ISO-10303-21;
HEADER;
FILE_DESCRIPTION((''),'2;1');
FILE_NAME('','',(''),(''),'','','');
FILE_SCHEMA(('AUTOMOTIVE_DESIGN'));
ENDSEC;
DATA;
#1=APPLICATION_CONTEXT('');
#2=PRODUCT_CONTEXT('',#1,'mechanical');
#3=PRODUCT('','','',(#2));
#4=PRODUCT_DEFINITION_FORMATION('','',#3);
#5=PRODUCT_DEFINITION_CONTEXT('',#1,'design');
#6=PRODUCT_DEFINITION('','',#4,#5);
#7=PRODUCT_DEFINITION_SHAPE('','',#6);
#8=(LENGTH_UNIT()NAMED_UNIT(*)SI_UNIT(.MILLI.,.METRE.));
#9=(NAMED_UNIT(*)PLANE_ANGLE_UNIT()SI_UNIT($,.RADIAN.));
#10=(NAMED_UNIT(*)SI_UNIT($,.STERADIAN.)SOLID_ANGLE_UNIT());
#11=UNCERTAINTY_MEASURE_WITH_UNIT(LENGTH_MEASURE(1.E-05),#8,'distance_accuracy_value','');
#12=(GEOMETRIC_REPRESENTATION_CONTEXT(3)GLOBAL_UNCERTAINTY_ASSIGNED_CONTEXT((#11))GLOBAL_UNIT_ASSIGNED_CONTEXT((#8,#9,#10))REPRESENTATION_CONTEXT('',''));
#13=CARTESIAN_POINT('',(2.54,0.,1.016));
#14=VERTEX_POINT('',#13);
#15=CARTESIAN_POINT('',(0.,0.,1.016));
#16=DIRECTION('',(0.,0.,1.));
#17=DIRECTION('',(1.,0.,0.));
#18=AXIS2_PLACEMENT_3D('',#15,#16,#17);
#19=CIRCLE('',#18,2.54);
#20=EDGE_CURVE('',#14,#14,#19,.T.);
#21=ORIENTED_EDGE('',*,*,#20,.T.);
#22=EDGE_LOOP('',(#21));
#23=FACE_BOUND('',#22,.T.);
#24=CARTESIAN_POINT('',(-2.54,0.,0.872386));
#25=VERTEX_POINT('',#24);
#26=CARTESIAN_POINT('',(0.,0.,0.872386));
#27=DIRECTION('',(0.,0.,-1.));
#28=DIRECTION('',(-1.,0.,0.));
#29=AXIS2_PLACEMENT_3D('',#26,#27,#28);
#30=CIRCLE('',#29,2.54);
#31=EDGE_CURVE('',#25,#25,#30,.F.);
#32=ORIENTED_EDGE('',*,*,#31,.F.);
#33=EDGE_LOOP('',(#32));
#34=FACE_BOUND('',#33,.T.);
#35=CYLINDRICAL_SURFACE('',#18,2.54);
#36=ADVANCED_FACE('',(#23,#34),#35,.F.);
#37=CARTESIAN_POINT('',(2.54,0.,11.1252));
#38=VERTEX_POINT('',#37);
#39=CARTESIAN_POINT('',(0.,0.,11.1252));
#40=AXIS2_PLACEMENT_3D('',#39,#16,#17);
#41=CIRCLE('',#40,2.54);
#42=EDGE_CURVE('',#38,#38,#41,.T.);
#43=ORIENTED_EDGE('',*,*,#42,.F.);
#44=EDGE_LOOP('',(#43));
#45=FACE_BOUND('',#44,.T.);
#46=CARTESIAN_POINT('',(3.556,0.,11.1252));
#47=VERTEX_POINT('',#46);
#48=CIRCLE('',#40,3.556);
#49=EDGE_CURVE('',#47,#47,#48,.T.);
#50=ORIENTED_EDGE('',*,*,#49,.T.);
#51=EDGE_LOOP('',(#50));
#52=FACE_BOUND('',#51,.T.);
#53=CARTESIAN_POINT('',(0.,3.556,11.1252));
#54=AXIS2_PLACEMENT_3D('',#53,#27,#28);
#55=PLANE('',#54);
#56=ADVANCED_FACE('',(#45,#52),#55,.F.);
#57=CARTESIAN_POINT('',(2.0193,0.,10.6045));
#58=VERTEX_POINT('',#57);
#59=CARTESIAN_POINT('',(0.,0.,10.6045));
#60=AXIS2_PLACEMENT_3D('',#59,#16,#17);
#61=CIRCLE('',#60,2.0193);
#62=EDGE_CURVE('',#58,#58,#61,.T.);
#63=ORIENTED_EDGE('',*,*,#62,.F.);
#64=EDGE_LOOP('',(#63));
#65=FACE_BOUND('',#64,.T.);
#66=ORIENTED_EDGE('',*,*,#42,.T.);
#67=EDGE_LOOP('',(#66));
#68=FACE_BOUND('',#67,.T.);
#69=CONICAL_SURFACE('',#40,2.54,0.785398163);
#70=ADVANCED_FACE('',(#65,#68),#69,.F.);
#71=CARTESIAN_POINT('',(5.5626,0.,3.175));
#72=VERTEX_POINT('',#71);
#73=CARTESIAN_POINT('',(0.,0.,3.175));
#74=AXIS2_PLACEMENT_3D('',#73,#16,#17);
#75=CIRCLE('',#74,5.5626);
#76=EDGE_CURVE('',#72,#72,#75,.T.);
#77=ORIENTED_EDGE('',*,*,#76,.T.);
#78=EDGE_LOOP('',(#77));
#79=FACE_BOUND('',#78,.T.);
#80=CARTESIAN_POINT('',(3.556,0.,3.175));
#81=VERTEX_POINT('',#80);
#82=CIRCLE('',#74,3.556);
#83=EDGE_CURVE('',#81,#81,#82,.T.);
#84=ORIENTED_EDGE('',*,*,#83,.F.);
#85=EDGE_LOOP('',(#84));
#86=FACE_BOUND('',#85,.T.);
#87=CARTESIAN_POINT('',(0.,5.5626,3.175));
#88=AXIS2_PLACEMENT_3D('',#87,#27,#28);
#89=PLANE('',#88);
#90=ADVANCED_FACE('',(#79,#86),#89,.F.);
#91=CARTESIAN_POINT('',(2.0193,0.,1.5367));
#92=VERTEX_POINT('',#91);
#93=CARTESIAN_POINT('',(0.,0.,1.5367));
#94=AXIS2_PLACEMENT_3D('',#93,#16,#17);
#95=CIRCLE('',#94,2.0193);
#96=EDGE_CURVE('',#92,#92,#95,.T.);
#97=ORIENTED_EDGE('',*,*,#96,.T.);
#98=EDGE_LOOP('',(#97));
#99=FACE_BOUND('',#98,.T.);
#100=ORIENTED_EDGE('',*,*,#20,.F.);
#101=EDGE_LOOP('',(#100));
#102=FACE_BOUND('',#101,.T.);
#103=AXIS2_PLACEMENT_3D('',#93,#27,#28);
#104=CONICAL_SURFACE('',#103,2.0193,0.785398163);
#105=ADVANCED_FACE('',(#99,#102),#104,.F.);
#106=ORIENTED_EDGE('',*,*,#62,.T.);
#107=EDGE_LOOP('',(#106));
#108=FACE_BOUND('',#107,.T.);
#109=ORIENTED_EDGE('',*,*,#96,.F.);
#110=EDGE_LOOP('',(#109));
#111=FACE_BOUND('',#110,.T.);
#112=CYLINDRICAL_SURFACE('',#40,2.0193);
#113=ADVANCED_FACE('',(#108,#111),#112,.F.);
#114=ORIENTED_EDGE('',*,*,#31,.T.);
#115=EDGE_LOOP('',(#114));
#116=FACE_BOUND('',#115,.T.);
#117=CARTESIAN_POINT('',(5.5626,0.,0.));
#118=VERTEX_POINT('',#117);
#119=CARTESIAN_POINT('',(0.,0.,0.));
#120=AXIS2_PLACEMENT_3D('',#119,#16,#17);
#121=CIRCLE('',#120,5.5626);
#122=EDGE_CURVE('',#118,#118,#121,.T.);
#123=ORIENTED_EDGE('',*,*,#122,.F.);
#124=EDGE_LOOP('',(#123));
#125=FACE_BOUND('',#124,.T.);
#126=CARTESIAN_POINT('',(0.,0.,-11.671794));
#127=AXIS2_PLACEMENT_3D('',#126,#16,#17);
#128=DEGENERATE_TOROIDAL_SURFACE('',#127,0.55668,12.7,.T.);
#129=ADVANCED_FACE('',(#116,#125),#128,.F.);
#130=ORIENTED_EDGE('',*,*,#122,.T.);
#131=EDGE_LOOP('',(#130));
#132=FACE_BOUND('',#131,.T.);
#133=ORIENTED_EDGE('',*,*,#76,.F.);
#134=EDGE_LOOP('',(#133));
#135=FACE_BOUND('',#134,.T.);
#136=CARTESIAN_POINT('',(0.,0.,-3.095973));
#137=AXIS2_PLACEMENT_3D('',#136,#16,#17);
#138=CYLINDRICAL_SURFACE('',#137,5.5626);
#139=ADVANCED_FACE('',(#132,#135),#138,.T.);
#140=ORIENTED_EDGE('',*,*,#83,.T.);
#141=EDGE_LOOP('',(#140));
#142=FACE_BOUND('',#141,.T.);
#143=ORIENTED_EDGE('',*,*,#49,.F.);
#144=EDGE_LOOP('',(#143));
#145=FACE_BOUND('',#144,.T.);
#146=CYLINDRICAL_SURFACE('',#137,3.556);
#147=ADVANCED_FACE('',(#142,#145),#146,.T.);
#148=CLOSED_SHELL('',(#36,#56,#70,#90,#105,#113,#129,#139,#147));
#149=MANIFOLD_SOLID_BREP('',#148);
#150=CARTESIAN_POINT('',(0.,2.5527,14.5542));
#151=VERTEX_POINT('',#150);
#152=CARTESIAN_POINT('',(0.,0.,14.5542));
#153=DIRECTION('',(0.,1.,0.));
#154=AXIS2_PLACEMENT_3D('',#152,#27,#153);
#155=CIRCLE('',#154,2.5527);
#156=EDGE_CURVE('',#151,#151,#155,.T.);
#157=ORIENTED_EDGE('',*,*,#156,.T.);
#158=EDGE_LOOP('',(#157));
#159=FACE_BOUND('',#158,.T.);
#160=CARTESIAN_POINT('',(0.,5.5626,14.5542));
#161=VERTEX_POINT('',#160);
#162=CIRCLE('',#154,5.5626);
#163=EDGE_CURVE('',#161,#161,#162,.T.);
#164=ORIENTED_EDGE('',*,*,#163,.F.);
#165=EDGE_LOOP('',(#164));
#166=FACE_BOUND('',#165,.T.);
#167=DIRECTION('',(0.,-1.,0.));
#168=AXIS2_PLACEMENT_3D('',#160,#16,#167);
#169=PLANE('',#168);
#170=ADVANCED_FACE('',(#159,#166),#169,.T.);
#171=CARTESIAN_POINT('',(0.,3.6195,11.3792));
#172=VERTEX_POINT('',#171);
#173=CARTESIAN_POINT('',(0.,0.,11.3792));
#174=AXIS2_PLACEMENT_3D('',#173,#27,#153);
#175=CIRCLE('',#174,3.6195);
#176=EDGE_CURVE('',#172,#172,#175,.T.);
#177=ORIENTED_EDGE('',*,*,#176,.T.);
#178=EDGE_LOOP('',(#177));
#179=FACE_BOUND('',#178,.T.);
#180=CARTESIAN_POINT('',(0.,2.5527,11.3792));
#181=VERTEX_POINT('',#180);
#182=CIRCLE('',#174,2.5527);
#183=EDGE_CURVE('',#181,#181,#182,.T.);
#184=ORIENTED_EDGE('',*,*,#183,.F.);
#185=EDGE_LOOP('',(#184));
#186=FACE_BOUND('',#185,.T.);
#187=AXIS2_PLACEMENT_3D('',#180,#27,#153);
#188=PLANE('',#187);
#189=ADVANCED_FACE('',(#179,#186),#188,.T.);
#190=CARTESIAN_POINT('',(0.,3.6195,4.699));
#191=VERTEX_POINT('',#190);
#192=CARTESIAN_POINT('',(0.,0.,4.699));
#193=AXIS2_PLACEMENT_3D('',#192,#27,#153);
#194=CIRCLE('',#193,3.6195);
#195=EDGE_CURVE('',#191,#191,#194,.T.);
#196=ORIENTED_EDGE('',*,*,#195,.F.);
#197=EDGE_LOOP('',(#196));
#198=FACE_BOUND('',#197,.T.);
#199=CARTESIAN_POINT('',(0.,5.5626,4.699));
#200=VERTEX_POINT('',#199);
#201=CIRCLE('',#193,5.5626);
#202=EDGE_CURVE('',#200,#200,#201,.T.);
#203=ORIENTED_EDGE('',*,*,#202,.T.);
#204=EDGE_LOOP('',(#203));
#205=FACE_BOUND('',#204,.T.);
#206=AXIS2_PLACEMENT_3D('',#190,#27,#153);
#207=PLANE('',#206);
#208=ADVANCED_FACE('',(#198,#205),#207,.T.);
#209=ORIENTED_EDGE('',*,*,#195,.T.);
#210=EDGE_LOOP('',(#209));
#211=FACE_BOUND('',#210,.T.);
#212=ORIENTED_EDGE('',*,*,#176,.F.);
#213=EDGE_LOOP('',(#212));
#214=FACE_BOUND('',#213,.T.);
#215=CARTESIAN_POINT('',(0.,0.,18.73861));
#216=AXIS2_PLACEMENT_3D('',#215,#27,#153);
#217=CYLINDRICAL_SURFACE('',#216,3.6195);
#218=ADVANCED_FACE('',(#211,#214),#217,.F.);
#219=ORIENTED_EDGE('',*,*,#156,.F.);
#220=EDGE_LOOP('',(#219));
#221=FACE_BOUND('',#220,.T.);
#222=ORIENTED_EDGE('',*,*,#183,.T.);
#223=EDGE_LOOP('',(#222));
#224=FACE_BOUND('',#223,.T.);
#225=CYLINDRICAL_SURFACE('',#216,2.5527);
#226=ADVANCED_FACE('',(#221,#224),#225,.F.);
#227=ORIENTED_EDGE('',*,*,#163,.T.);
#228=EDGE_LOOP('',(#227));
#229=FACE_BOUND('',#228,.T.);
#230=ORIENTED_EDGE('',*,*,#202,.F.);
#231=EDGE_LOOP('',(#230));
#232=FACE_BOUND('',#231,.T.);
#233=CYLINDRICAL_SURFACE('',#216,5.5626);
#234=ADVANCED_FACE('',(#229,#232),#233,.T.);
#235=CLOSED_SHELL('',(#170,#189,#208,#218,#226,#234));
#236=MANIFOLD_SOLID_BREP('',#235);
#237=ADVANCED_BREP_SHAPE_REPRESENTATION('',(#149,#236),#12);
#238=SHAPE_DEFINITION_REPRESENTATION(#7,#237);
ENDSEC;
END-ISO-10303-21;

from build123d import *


# Read off the part's stored shape, not the designer's step: #10-32 Tapped Hole1
with BuildPart() as part:
    # Sketch1 → Revolve1 (revolve)
    with BuildSketch(Plane(origin=(0, 0, 0), x_dir=(0, 0, -1), z_dir=(1, 0, 0)), mode=Mode.PRIVATE) as revolve1_sk:
        with BuildLine():
            Line((0, 5.5626), (-3.175, 5.5626))
            Line((-3.175, 5.5626), (-3.175, 3.556))
            Line((-3.175, 3.556), (-11.1252, 3.556))
            Line((-11.1252, 3.556), (-11.1252, 0))
            Line((-11.1252, 0), (-1.016, 0))
            ThreePointArc((-1.016, 0), (-0.821524687, 2.838564783), (0, 5.5626))
        make_face()
    revolve(revolve1_sk.sketch.rotate(Axis((0, 0, -3.095973099), (0, 0, -1)), 90), axis=Axis((0, 0, -3.095973099), (0, 0, -1)))

    # #10-32 Tapped Hole1 outline → #10-32 Tapped Hole1 (revolve, cut)
    with BuildSketch(Plane.XZ):
        Polygon((0, 0.872385993), (2.54, 0.872385993), (2.54, 1.016), (2.0193, 1.5367), (2.0193, 10.6045), (2.54, 11.1252), (0, 11.1252), align=None)
    revolve(axis=Axis((0, 0, 0), (0, 0, 1)), mode=Mode.SUBTRACT)


with BuildPart() as body_2:
    # Sketch4 → Revolve2 (revolve)
    with BuildSketch(Plane(origin=(0, 0, 0), x_dir=(0, 0, -1), z_dir=(1, 0, 0))):
        Polygon((-4.699, 3.6195), (-4.699, 5.5626), (-14.5542, 5.5626), (-14.5542, 2.5527), (-11.3792, 2.5527), (-11.3792, 3.6195), align=None)
    revolve(axis=Axis((0, 0, 18.738609771), (0, 0, 1)))


solid = Compound([part.part, body_2.part])
